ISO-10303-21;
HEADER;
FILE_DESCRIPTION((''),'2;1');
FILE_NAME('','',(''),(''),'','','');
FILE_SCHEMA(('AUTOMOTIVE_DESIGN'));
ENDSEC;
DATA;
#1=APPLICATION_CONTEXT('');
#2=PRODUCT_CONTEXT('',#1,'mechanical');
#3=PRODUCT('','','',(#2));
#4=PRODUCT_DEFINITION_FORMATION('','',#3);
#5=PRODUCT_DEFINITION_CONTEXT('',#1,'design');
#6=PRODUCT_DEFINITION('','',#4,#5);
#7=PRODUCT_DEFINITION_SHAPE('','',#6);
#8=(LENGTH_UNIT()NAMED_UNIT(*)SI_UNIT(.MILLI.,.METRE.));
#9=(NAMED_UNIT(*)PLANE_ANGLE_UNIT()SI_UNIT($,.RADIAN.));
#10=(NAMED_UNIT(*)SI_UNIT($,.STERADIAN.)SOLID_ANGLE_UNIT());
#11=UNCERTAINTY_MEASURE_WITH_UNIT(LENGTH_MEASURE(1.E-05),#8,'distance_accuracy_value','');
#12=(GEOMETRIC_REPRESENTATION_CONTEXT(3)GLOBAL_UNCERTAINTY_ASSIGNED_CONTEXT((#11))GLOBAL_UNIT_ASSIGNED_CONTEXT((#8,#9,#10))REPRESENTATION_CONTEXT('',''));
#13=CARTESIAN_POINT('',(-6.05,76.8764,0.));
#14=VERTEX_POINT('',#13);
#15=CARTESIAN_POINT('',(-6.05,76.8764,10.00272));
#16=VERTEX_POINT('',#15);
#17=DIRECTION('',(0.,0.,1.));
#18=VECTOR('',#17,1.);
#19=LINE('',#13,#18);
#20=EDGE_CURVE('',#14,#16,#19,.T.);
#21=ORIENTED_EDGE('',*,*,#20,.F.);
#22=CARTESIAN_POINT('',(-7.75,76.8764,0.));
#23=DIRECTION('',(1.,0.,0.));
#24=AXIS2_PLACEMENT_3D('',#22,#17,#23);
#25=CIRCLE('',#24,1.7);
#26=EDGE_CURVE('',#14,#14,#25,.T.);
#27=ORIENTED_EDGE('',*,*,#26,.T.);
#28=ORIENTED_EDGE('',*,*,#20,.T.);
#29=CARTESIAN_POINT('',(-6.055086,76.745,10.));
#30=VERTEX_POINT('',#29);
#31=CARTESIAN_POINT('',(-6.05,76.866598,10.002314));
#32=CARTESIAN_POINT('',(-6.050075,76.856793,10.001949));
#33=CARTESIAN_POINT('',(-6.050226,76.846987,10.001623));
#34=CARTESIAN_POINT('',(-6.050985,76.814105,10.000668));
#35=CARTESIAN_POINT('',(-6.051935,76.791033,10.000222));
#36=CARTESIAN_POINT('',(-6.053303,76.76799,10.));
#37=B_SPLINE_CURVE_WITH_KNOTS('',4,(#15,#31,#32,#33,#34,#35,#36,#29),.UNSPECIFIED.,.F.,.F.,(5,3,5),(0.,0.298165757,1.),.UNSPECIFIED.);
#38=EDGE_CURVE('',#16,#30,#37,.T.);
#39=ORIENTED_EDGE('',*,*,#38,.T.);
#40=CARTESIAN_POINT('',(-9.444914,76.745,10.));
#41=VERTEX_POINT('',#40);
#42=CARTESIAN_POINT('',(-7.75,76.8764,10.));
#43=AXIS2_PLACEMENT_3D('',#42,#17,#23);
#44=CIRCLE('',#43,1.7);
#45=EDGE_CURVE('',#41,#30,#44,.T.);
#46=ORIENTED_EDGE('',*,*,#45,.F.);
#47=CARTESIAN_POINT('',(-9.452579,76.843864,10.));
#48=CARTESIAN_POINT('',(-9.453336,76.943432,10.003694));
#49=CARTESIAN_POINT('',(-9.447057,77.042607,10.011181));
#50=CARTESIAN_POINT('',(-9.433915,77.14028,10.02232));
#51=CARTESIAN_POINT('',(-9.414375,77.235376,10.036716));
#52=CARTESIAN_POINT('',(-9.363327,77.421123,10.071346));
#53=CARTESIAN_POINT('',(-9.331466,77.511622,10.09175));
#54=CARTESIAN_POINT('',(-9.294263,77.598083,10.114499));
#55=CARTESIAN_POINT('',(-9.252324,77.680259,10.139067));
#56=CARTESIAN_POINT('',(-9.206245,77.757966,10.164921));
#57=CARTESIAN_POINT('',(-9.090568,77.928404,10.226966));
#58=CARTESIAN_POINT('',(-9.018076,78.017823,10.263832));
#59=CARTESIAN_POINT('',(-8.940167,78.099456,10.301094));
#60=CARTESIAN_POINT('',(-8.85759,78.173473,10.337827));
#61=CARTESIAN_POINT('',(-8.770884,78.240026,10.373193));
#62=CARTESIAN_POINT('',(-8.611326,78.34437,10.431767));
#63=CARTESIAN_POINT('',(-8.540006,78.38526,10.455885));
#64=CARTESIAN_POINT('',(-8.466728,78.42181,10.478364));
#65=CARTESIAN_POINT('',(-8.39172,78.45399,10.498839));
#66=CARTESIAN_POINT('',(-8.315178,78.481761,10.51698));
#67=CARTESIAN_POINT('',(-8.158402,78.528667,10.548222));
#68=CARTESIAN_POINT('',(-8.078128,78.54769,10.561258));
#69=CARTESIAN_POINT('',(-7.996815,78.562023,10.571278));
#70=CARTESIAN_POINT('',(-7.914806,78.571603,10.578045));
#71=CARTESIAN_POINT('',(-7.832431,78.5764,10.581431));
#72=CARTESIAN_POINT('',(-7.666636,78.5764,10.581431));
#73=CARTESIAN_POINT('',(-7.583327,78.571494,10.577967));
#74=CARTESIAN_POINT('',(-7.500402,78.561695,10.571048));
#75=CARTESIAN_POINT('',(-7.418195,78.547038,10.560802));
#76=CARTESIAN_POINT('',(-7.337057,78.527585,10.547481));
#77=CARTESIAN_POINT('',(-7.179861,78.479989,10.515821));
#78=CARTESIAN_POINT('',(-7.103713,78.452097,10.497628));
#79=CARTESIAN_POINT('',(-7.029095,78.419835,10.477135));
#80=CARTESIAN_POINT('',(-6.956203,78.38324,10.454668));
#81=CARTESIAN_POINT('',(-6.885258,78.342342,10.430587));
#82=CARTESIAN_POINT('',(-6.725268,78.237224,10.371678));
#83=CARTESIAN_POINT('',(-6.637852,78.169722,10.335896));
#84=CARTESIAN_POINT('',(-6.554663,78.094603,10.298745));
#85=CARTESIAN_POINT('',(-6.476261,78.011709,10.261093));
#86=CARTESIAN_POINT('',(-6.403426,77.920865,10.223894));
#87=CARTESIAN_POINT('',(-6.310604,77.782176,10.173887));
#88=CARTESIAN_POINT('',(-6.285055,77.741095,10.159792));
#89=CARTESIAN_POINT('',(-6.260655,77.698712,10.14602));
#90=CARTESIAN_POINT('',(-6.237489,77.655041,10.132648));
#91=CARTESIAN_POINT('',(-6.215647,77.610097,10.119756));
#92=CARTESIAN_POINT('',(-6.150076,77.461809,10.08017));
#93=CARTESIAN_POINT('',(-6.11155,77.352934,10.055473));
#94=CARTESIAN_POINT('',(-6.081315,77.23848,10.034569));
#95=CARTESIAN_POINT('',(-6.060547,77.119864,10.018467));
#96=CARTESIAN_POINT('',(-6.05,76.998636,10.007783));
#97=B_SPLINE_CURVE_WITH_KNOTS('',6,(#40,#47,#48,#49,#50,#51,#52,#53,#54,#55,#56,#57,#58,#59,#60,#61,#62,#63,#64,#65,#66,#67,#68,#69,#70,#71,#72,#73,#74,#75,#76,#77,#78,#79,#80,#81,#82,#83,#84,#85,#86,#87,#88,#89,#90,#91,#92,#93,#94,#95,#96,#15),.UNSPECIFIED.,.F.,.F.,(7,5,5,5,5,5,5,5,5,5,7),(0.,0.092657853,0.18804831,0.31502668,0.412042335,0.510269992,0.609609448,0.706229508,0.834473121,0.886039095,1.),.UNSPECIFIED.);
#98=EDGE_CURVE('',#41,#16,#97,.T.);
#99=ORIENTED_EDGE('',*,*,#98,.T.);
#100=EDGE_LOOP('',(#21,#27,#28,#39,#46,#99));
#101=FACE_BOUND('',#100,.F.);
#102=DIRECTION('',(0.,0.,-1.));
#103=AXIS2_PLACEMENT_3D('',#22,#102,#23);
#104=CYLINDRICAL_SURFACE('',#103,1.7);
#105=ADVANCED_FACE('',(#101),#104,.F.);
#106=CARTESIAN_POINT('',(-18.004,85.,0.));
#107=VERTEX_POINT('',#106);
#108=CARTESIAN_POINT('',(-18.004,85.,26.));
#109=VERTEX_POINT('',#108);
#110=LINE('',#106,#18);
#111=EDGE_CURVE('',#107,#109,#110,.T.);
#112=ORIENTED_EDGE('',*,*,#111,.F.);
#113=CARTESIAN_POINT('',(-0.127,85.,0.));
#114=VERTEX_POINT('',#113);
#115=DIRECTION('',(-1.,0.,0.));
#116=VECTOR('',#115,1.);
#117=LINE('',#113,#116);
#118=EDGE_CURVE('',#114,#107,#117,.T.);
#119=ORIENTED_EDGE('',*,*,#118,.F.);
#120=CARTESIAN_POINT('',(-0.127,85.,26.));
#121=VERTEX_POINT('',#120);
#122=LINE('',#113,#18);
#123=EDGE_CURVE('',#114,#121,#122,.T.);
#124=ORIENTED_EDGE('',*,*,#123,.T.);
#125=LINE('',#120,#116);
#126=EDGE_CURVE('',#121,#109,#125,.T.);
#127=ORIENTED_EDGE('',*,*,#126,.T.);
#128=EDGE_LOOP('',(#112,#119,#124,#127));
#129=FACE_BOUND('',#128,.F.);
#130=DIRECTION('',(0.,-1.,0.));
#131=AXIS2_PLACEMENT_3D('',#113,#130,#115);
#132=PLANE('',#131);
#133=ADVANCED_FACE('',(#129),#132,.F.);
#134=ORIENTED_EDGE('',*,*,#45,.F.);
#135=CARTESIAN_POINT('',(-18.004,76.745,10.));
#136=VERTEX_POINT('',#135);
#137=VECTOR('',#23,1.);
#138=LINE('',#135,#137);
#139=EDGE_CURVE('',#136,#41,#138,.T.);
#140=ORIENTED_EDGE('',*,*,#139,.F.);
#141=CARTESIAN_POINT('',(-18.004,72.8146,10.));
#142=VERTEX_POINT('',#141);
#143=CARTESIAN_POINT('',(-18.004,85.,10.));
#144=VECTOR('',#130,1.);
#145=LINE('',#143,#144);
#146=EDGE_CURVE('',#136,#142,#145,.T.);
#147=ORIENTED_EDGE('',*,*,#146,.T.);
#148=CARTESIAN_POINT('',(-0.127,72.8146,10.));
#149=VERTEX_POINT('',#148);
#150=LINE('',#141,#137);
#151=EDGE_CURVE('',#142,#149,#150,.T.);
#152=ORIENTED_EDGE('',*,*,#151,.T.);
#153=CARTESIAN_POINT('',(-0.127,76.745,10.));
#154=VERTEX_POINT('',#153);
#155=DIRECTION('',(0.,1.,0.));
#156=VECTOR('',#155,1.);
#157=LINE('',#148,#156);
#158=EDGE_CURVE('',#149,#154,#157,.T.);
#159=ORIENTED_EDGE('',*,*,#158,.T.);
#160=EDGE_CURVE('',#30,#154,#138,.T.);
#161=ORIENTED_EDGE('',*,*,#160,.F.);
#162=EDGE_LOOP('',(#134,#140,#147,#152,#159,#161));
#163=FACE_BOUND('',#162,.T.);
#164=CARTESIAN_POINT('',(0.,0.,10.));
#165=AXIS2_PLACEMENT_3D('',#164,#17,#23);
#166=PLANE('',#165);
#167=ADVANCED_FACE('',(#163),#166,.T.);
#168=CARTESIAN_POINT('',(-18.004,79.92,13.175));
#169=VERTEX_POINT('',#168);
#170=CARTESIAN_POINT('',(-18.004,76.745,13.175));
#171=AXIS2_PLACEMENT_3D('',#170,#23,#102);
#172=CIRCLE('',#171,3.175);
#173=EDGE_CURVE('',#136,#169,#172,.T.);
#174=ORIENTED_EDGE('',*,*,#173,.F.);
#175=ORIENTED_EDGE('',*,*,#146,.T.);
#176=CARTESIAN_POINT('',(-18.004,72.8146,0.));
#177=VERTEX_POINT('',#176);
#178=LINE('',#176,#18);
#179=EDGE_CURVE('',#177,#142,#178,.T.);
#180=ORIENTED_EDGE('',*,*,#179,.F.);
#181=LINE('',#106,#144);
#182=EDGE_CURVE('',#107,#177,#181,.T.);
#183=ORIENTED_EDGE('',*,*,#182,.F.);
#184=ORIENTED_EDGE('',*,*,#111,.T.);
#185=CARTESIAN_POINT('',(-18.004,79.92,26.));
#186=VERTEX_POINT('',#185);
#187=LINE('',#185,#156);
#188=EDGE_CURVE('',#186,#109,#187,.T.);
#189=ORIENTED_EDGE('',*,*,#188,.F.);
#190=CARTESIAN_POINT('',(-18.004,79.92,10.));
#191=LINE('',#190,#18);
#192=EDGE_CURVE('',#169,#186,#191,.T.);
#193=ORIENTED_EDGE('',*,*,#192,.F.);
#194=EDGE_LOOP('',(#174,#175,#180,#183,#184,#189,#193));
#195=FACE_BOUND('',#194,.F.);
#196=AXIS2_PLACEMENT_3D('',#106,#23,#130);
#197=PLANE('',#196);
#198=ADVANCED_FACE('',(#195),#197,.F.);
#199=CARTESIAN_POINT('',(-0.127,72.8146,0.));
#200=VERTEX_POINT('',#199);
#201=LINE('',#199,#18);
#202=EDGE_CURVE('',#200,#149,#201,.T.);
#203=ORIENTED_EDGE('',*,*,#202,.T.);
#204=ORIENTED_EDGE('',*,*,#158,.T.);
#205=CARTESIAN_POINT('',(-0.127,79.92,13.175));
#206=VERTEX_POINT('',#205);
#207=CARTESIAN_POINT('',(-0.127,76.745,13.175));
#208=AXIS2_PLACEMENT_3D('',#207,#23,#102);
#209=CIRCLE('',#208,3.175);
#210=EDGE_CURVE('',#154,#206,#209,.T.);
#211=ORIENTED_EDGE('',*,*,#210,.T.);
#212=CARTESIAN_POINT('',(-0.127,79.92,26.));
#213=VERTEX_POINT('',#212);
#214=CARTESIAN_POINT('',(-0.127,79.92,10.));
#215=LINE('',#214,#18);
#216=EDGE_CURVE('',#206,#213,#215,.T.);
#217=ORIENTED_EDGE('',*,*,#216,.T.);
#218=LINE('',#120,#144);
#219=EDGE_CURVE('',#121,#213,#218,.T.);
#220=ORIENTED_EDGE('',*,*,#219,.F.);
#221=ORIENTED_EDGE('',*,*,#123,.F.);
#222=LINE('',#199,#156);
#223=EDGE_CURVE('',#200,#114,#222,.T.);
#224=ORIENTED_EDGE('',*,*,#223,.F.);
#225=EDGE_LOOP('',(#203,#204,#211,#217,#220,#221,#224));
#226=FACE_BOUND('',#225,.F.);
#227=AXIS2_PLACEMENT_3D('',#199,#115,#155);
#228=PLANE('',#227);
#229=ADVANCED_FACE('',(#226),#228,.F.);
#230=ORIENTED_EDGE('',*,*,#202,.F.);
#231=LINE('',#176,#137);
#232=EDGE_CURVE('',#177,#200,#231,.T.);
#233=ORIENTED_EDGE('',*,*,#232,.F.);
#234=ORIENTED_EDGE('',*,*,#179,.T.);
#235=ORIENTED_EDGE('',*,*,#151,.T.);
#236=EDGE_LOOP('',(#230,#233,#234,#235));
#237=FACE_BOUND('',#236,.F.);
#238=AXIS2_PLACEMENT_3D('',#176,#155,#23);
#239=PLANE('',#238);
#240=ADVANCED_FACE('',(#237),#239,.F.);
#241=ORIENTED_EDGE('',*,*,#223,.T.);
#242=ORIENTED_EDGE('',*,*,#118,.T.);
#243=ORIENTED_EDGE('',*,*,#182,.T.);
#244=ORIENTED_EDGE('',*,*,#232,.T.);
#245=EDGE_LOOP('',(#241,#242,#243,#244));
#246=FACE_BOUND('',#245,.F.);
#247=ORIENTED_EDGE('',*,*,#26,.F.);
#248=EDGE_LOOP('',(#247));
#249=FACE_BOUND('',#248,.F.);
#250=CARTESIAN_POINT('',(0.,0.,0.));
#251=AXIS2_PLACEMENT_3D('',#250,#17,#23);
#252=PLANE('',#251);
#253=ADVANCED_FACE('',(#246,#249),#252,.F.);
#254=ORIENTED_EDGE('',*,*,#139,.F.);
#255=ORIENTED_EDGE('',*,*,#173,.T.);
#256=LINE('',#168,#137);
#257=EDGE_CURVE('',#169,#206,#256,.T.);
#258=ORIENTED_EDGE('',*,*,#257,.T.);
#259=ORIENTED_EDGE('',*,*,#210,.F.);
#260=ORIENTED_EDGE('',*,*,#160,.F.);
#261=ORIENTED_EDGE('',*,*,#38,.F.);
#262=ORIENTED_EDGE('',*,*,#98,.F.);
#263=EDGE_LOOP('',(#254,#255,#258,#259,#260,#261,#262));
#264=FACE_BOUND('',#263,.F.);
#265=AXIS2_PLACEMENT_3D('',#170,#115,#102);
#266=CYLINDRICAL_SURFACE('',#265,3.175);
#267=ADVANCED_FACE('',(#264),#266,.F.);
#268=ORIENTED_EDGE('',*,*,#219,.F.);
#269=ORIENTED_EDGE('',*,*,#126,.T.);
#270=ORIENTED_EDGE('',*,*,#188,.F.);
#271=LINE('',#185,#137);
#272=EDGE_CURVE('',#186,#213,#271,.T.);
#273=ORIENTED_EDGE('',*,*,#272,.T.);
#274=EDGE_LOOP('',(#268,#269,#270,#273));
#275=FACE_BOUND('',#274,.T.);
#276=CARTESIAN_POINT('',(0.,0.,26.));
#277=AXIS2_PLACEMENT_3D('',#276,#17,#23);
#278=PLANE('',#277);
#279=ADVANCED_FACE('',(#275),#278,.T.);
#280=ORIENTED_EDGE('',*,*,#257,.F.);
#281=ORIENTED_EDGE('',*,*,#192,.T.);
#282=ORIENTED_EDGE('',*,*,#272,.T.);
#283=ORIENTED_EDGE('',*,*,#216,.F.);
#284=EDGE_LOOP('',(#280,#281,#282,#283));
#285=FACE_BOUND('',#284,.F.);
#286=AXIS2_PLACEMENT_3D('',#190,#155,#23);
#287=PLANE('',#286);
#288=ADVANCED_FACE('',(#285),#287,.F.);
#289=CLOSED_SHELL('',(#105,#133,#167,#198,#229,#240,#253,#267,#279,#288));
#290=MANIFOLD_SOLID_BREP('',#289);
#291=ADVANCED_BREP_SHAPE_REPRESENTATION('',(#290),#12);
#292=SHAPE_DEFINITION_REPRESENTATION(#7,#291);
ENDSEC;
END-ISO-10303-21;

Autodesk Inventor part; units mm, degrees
ref_plane "YZ Plane" through (0, 0, 0) normal (1, 0, 0) x (0, 1, 0)
ref_plane "XZ Plane" through (0, 0, 0) normal (0, 1, 0) x (-1, 0, 0)
ref_plane "XY Plane" through (0, 0, 0) normal (0, 0, 1) x (1, 0, 0)
ref_plane "Work Plane1" through (0, 0, 0) normal (0, 0, 1) x (1, 0, 0)
sketch "Sketch1" plane through (0, 0, 0) normal (0, 0, 1) x (1, 0, 0)
  line L0 (17.75, 85) -> (-18.004, 85) construction
  circle A0 centre (-7.75, 70) radius 1.7 construction
  line L1 (-9.375, 72.8146) -> (-6.125, 72.8146) construction
  line L2 (-18.004, 85) -> (-18.004, -85) construction
  line L3 (-3.25, 73.1895) -> (-3.25, 76.1105) construction
  line L4 (-11, 70) -> (-9.375, 72.8146) construction
  line L5 (3.2502, 74.65) -> (3.2502, 77.444) construction
  line L6 (3.2502, 77.825) -> (3.2502, 81) construction
  line L7 (-0.127, 85) -> (-18.004, 85)
  line L8 (-18.004, 85) -> (-18.004, 72.8146)
  line L9 (-18.004, 72.8146) -> (-0.127, 72.8146)
  line L10 (-0.127, 72.8146) -> (-0.127, 85)
  circle A1 centre (-7.75, 76.8764) radius 1.7
  point P0 (0, 0)
  dimension "d0" = 3.4
  dimension "d1" = 12.1854
  dimension "d3" = 17.877
  dimension "d6" = 4.0618
extrude "Leg" add sketch "Sketch1" along normal blind 10
sketch "Sketch2" plane through (0, 0, 10) normal (0, 0, 1) x (1, 0, 0)
  line L0 (-0.127, 72.8146) -> (-0.127, 85) projected
  line L1 (-18.004, 85) -> (-18.004, 72.8146) projected
  line L2 (-18.004, 85) -> (-18.004, 80.9625)
  line L3 (-0.127, 80.9625) -> (-0.127, 85)
  line L4 (-0.127, 85) -> (-18.004, 85)
  line L5 (-18.004, 85) -> (-18.004, 79.92)
  line L6 (-18.004, 79.92) -> (-0.127, 79.92)
  line L7 (-0.127, 79.92) -> (-0.127, 85)
  point P0 (0, 0)
  dimension "d7" = 5.08
extrude "Extrusion2" add sketch "Sketch2" along normal blind 16
fillet "Fillet1" radius 3.175 1 edges at (-9.0655, 79.92, 10)
equation "\"d6\" = 0.333333 * d1"
properties part number "Mounting Bracket Bottom"
